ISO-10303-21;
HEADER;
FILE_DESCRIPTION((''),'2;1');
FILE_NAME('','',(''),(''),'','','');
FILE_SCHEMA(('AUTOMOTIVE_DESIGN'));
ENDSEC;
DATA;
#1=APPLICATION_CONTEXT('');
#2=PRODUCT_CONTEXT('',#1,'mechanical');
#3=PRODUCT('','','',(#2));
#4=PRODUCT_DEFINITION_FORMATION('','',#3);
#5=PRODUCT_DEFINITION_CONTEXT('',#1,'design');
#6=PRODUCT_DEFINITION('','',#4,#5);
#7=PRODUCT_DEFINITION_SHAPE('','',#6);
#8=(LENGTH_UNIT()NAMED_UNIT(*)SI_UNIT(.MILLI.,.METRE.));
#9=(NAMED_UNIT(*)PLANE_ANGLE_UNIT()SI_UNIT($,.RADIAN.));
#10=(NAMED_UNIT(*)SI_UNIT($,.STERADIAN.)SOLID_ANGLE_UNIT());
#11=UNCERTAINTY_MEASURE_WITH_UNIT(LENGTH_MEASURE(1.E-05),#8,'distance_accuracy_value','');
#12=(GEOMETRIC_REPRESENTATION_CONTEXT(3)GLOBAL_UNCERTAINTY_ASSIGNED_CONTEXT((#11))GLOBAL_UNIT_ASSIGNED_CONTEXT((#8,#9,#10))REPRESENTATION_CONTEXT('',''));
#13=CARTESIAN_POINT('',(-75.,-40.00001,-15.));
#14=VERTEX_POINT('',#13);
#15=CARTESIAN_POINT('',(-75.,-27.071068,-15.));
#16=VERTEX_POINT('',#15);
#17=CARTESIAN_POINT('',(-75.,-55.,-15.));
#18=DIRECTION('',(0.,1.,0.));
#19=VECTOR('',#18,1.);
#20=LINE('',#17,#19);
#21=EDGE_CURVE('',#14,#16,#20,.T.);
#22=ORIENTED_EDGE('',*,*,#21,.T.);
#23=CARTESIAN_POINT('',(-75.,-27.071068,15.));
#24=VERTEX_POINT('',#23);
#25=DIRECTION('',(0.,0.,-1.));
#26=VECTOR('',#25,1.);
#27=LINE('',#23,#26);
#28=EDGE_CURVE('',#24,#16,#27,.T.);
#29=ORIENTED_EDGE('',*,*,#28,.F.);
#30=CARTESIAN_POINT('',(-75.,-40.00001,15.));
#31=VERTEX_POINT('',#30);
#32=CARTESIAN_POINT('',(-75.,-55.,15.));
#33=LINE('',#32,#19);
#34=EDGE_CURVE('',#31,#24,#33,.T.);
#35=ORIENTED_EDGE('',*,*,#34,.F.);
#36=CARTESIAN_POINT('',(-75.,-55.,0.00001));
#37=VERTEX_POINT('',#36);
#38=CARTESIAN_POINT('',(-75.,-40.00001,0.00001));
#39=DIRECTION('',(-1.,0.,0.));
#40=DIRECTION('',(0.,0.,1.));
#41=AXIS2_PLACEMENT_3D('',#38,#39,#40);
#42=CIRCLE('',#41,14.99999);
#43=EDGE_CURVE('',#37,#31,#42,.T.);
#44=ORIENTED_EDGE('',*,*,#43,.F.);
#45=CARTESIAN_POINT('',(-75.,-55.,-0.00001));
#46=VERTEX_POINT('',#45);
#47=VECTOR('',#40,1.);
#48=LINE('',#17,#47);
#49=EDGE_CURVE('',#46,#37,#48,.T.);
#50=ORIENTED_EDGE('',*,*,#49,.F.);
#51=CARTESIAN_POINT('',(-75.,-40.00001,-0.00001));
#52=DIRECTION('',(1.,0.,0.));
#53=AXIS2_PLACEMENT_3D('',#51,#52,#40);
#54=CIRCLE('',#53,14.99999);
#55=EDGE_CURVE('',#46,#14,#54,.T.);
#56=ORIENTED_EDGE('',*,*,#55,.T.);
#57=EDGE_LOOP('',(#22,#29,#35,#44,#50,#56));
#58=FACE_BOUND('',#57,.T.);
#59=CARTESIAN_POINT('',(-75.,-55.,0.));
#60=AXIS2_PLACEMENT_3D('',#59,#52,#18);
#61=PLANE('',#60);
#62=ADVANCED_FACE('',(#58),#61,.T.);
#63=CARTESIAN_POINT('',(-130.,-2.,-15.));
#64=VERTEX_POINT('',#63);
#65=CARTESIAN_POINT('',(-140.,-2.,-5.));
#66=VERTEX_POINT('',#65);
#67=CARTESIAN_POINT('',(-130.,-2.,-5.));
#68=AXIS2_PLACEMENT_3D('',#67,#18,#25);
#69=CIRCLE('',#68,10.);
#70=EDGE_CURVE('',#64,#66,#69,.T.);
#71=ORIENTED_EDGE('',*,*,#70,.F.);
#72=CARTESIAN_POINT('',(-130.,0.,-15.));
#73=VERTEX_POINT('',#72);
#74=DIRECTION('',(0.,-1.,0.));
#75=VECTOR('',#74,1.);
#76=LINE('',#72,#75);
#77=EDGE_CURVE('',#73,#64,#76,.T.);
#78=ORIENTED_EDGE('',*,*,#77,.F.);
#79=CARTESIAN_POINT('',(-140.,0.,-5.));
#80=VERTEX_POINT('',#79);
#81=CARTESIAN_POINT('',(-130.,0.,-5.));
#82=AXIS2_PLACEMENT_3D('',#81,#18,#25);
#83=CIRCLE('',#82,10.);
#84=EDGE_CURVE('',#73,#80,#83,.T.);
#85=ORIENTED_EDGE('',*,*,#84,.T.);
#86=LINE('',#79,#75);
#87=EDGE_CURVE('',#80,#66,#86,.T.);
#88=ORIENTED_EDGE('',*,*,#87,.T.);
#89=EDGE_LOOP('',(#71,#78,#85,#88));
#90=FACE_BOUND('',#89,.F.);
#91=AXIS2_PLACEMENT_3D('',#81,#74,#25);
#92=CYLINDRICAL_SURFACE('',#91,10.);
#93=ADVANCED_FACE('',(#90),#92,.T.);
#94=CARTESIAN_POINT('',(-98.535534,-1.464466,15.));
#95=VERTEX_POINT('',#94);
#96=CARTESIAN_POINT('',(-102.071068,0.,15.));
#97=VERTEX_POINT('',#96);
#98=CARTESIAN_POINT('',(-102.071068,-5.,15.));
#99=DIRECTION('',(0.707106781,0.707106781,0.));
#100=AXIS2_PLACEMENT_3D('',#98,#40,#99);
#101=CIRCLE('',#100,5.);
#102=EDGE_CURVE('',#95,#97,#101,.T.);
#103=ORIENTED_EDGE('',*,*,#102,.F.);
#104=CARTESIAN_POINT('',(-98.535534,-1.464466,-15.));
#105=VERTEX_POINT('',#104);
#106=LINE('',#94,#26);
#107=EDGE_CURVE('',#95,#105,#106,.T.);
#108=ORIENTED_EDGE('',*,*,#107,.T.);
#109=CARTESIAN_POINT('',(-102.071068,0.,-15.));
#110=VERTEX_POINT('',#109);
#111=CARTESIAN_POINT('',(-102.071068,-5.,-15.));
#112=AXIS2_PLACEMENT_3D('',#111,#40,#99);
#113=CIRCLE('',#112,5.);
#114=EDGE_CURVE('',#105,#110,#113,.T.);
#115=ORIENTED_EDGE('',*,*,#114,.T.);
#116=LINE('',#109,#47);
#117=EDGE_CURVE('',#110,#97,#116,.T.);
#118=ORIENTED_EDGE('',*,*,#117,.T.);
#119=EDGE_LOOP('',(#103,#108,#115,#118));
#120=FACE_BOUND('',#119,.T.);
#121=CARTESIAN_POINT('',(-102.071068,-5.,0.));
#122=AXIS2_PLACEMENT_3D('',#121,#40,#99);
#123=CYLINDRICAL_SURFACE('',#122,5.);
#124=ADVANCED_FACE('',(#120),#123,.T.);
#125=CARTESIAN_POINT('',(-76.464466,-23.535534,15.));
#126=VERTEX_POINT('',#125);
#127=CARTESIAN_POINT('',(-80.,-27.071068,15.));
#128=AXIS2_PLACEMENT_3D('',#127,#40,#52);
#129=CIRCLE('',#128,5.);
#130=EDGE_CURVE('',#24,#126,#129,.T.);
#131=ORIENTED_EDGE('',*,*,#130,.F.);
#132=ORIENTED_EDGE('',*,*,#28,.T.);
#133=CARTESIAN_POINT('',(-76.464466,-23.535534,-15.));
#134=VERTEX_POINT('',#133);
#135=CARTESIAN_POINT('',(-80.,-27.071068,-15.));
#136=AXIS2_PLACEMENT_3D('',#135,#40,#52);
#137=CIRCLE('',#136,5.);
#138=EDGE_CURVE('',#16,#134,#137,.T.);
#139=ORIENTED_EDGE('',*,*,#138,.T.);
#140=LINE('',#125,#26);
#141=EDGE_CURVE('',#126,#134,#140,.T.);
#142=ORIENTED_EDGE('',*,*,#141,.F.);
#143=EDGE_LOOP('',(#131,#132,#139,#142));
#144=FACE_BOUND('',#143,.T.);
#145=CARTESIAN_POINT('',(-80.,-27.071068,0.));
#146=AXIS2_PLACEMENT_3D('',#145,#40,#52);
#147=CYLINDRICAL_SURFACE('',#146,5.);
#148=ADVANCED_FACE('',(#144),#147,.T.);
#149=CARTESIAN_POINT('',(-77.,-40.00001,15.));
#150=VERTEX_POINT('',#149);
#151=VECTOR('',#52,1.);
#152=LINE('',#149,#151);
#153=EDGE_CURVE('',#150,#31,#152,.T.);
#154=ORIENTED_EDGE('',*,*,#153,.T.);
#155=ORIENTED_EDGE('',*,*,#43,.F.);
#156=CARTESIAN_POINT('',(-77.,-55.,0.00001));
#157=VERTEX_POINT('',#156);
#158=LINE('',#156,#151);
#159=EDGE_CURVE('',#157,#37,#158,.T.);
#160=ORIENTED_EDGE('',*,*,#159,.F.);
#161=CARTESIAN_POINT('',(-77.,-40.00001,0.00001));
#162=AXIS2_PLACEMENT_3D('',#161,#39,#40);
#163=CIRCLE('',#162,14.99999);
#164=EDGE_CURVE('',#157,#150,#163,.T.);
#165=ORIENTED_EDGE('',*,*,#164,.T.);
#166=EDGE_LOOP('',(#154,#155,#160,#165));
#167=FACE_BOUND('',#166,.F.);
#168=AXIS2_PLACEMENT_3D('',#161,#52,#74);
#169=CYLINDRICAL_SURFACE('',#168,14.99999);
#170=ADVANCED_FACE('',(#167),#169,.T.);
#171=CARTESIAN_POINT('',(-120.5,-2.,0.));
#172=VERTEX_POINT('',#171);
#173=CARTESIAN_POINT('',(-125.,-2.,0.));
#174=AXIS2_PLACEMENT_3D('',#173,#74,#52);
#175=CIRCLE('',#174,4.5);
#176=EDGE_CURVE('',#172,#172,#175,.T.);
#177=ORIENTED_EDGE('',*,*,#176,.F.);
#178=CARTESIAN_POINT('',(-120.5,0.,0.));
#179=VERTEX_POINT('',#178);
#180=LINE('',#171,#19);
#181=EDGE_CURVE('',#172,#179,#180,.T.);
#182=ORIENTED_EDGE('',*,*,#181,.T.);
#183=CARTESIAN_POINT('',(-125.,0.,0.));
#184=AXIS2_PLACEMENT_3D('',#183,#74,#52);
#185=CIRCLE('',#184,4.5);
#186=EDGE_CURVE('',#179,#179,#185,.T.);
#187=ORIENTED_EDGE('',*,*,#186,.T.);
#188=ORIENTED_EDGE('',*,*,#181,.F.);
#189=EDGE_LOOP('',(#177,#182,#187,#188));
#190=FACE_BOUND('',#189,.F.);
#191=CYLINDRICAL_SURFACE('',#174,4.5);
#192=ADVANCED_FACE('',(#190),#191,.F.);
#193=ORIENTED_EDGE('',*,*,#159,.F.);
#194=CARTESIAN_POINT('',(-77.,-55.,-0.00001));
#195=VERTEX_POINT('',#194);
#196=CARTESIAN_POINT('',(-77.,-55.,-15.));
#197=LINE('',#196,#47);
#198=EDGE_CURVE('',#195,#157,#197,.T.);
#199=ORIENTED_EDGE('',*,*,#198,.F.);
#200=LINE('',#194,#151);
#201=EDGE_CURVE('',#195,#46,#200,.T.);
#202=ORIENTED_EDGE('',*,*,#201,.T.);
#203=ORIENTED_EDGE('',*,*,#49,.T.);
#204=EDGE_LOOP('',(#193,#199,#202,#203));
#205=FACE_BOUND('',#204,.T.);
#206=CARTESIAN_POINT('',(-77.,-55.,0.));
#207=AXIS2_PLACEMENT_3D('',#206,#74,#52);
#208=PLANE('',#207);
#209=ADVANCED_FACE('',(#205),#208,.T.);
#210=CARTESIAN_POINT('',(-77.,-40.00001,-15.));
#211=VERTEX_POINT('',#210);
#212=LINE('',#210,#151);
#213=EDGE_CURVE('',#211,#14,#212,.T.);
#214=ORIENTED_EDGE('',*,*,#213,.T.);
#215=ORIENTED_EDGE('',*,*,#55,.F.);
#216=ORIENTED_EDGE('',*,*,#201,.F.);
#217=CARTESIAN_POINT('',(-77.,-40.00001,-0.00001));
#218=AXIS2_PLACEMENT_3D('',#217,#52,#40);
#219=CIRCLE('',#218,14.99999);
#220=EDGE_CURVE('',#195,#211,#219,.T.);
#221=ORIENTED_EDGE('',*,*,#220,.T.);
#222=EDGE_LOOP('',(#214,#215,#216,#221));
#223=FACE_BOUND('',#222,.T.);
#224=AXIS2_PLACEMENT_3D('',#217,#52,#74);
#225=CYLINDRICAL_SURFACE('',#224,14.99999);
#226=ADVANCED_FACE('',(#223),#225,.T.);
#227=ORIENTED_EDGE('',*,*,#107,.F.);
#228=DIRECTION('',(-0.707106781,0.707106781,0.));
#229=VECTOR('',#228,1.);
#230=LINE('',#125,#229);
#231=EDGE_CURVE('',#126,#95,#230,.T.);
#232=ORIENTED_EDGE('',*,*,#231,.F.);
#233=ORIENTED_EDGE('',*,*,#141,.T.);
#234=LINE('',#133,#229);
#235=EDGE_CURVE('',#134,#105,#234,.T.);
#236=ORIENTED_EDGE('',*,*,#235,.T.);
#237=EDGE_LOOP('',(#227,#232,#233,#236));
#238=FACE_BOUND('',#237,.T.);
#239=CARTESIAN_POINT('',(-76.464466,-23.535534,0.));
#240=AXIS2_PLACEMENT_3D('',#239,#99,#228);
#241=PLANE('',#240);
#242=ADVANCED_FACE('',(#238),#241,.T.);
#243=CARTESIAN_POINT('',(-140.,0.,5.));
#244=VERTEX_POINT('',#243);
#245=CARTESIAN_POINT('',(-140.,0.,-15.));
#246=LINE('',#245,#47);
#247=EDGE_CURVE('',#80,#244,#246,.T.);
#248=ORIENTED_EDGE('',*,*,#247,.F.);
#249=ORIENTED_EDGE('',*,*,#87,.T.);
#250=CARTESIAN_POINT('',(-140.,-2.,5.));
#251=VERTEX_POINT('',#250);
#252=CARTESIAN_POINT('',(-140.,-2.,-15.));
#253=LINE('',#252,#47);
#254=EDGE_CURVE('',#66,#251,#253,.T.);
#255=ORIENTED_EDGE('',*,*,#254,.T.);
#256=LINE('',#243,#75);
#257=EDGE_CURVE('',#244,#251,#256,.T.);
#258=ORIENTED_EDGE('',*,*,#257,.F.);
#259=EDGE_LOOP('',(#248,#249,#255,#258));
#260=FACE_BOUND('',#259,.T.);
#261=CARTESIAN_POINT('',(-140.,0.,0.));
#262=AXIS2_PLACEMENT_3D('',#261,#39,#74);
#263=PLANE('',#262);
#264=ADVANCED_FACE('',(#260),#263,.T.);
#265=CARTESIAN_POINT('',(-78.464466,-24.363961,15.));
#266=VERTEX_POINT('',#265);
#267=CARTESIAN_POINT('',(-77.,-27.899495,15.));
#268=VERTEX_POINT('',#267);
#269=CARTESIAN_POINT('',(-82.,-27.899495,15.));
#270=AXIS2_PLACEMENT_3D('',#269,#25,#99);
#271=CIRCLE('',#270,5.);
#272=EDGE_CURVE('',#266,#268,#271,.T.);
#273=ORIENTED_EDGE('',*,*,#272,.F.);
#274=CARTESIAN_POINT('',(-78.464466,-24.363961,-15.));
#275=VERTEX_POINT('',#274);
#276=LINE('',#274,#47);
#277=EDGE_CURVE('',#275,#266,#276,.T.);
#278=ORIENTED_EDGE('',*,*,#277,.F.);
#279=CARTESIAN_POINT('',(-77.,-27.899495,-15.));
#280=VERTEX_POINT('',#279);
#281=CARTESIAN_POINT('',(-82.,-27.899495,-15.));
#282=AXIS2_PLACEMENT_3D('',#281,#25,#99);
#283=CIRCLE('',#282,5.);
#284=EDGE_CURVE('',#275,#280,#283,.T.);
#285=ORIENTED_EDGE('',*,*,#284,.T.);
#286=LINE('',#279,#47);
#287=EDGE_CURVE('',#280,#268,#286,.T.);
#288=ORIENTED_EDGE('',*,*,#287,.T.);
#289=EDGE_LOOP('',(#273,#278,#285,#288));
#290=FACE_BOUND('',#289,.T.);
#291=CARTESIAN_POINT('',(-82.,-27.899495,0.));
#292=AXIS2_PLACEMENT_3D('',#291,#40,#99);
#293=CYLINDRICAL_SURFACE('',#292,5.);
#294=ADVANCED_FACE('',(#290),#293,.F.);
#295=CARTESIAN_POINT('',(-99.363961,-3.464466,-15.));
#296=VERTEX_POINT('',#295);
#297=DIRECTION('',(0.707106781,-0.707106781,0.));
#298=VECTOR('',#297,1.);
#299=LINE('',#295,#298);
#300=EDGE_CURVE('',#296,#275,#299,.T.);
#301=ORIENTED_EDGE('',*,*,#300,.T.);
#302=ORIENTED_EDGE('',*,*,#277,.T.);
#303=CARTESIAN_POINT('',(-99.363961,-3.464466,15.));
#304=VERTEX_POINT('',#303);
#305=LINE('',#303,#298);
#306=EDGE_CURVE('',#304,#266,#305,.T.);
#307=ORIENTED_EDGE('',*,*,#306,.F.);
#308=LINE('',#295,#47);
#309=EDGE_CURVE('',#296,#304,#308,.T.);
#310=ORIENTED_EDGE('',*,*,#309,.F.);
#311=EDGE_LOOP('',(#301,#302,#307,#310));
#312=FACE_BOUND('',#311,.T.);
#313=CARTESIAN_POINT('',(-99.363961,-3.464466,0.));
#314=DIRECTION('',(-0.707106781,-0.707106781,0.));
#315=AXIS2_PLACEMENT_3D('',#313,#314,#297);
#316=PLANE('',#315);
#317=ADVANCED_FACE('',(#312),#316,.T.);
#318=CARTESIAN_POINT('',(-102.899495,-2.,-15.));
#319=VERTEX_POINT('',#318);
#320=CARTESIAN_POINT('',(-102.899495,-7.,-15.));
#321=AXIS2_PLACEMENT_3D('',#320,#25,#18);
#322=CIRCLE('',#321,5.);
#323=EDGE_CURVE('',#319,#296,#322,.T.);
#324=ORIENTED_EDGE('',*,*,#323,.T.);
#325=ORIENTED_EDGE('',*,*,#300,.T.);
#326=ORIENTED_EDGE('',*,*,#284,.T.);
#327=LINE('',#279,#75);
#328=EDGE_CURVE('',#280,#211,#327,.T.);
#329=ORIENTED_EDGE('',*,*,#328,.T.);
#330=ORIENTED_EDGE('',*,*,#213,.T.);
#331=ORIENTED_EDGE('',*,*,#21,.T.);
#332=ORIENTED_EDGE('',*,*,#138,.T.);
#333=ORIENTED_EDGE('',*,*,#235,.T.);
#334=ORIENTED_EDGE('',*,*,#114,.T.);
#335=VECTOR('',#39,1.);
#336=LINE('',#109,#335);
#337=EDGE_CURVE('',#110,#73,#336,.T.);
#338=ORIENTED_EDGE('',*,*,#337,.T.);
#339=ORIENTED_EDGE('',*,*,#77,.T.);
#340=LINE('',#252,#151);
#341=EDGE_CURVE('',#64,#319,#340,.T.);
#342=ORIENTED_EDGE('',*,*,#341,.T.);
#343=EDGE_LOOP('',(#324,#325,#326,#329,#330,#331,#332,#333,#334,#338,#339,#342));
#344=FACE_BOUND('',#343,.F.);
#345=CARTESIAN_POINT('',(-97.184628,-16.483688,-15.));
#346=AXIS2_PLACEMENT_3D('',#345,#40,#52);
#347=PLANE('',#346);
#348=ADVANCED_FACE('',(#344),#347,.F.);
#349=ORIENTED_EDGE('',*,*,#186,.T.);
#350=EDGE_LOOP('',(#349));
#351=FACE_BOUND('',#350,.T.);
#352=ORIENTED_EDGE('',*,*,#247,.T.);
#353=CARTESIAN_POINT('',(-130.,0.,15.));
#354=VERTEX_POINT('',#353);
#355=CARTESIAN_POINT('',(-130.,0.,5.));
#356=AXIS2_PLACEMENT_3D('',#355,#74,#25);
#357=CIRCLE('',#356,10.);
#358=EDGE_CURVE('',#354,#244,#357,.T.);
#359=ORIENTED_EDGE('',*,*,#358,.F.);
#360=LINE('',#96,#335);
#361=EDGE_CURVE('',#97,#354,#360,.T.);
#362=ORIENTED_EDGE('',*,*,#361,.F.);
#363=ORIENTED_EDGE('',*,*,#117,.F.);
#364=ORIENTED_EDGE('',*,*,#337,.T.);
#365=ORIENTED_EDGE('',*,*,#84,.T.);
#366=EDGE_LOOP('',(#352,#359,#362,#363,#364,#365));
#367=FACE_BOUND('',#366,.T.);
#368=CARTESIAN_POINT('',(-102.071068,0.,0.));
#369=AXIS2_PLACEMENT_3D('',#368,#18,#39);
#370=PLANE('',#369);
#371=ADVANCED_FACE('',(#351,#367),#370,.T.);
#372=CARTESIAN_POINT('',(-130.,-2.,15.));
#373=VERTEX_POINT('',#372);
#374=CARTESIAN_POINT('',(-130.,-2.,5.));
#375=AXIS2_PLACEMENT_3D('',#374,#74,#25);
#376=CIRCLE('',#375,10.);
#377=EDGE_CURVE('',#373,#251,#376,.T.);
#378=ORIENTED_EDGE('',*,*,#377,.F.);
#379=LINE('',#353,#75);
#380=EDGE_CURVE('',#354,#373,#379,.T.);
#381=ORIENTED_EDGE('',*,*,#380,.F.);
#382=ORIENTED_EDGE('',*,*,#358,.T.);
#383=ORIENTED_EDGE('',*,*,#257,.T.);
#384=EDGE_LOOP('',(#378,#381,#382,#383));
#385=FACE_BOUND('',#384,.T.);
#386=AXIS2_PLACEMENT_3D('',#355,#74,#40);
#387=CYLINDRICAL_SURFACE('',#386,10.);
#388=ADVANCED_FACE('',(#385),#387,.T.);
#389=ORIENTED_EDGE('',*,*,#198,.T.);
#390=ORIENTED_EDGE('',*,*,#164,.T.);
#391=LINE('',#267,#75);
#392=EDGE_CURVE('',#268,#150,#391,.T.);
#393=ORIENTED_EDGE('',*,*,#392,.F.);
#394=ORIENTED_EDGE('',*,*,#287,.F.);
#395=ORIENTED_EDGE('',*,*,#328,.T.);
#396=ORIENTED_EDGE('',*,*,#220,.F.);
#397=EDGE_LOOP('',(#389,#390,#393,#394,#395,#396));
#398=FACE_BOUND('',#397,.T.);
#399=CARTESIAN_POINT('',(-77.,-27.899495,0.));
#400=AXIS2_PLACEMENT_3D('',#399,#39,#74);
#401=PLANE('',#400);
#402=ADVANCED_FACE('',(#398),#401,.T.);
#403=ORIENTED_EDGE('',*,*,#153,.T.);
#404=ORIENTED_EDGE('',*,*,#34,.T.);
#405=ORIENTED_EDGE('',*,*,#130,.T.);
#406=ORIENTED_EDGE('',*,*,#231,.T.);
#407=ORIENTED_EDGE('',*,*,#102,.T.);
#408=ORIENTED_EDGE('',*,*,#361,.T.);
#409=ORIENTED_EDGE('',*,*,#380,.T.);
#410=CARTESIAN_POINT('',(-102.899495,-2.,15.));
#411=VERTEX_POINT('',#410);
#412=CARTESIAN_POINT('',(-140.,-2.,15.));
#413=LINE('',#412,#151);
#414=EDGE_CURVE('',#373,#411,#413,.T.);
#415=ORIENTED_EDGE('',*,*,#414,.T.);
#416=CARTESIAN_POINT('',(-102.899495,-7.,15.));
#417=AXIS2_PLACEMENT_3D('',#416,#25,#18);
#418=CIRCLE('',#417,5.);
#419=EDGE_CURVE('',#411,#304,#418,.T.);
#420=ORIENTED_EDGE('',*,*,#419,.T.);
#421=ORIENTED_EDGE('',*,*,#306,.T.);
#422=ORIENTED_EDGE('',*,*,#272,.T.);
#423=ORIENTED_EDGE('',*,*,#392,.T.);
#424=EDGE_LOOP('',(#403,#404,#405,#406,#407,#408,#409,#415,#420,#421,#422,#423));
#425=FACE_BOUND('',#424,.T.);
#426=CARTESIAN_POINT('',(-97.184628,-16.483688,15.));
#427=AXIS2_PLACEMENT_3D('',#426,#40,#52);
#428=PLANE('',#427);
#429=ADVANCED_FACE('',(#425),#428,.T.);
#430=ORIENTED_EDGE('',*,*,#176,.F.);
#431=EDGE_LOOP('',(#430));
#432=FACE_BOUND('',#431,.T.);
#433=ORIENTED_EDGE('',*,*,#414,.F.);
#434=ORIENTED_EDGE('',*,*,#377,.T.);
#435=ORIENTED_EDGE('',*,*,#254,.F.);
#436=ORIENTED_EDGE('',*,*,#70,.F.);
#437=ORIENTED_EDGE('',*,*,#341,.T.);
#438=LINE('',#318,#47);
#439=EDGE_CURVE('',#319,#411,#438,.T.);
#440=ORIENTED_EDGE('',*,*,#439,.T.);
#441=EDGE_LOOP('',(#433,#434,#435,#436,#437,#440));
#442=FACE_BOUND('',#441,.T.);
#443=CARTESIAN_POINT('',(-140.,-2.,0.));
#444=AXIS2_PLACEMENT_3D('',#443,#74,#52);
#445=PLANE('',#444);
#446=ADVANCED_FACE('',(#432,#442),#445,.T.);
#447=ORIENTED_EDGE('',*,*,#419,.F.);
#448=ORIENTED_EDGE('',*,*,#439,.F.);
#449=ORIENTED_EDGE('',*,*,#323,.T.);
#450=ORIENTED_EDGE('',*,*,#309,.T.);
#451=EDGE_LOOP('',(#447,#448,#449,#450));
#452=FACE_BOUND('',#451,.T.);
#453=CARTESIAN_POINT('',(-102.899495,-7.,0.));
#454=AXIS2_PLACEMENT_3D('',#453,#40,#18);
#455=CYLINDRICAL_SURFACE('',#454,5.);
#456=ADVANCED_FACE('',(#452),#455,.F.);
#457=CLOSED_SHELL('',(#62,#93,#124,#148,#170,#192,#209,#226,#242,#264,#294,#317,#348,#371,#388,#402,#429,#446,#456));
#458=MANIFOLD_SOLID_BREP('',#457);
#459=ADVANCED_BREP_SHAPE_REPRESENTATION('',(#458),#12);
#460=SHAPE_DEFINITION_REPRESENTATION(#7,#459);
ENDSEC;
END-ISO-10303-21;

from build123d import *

# Parameters (mm, degrees)
F1_DEPTH = 15
F2_R     = 14.99999
F3_R     = 4.5
F4_DEPTH = 2.001
F5_R     = 10


# Not quite as in the source:
# - a fillet or chamfer is up to 0.001 mm smaller than in the source, because OpenCascade refuses the exact size


with BuildPart() as f1:
    # F0 (on Top) → F1 (new body, symmetric)
    with BuildSketch(Plane.XY):
        with BuildLine():
            ThreePointArc((-98.5355339059, -1.4644660941), (-100.15765065, -0.3806023374), (-102.0710678119, 0))
            Line((-102.0710678119, 0), (-140, 0))
            Line((-140, 0), (-140, -2))
            Line((-140, -2), (-102.8994949366, -2))
            ThreePointArc((-102.8994949366, -2), (-100.9860777748, -2.3806023374), (-99.3639610307, -3.4644660941))
            Line((-99.3639610307, -3.4644660941), (-78.4644660941, -24.3639610307))
            ThreePointArc((-78.4644660941, -24.3639610307), (-77.3806023374, -25.9860777748), (-77, -27.8994949366))
            Line((-77, -27.8994949366), (-77, -55))
            Line((-77, -55), (-75, -55))
            Line((-75, -55), (-75, -27.0710678119))
            ThreePointArc((-75, -27.0710678119), (-75.3806023374, -25.15765065), (-76.4644660941, -23.5355339059))
            Line((-76.4644660941, -23.5355339059), (-98.5355339059, -1.4644660941))
        make_face()
    extrude(amount=F1_DEPTH, both=True)

    # F2 (radius 15 in the source; OpenCascade refuses exactly that, so slightly less here)
    f2_edges = [f1.edges().sort_by_distance(p)[0] for p in [
        (-76, -55, 15),
        (-76, -55, -15),
    ]]
    fillet(f2_edges, radius=F2_R)

    # F3 (on face) → F4 (cut, through all)
    with BuildSketch(Plane.XZ.offset(2)):
        with Locations((-125, 0)):
            Circle(F3_R)
    extrude(amount=-F4_DEPTH, mode=Mode.SUBTRACT)

    # F5
    f5_edges = [f1.edges().sort_by_distance(p)[0] for p in [
        (-140, -1, 15),
        (-140, -1, -15),
    ]]
    fillet(f5_edges, radius=F5_R)


solid = f1.part
